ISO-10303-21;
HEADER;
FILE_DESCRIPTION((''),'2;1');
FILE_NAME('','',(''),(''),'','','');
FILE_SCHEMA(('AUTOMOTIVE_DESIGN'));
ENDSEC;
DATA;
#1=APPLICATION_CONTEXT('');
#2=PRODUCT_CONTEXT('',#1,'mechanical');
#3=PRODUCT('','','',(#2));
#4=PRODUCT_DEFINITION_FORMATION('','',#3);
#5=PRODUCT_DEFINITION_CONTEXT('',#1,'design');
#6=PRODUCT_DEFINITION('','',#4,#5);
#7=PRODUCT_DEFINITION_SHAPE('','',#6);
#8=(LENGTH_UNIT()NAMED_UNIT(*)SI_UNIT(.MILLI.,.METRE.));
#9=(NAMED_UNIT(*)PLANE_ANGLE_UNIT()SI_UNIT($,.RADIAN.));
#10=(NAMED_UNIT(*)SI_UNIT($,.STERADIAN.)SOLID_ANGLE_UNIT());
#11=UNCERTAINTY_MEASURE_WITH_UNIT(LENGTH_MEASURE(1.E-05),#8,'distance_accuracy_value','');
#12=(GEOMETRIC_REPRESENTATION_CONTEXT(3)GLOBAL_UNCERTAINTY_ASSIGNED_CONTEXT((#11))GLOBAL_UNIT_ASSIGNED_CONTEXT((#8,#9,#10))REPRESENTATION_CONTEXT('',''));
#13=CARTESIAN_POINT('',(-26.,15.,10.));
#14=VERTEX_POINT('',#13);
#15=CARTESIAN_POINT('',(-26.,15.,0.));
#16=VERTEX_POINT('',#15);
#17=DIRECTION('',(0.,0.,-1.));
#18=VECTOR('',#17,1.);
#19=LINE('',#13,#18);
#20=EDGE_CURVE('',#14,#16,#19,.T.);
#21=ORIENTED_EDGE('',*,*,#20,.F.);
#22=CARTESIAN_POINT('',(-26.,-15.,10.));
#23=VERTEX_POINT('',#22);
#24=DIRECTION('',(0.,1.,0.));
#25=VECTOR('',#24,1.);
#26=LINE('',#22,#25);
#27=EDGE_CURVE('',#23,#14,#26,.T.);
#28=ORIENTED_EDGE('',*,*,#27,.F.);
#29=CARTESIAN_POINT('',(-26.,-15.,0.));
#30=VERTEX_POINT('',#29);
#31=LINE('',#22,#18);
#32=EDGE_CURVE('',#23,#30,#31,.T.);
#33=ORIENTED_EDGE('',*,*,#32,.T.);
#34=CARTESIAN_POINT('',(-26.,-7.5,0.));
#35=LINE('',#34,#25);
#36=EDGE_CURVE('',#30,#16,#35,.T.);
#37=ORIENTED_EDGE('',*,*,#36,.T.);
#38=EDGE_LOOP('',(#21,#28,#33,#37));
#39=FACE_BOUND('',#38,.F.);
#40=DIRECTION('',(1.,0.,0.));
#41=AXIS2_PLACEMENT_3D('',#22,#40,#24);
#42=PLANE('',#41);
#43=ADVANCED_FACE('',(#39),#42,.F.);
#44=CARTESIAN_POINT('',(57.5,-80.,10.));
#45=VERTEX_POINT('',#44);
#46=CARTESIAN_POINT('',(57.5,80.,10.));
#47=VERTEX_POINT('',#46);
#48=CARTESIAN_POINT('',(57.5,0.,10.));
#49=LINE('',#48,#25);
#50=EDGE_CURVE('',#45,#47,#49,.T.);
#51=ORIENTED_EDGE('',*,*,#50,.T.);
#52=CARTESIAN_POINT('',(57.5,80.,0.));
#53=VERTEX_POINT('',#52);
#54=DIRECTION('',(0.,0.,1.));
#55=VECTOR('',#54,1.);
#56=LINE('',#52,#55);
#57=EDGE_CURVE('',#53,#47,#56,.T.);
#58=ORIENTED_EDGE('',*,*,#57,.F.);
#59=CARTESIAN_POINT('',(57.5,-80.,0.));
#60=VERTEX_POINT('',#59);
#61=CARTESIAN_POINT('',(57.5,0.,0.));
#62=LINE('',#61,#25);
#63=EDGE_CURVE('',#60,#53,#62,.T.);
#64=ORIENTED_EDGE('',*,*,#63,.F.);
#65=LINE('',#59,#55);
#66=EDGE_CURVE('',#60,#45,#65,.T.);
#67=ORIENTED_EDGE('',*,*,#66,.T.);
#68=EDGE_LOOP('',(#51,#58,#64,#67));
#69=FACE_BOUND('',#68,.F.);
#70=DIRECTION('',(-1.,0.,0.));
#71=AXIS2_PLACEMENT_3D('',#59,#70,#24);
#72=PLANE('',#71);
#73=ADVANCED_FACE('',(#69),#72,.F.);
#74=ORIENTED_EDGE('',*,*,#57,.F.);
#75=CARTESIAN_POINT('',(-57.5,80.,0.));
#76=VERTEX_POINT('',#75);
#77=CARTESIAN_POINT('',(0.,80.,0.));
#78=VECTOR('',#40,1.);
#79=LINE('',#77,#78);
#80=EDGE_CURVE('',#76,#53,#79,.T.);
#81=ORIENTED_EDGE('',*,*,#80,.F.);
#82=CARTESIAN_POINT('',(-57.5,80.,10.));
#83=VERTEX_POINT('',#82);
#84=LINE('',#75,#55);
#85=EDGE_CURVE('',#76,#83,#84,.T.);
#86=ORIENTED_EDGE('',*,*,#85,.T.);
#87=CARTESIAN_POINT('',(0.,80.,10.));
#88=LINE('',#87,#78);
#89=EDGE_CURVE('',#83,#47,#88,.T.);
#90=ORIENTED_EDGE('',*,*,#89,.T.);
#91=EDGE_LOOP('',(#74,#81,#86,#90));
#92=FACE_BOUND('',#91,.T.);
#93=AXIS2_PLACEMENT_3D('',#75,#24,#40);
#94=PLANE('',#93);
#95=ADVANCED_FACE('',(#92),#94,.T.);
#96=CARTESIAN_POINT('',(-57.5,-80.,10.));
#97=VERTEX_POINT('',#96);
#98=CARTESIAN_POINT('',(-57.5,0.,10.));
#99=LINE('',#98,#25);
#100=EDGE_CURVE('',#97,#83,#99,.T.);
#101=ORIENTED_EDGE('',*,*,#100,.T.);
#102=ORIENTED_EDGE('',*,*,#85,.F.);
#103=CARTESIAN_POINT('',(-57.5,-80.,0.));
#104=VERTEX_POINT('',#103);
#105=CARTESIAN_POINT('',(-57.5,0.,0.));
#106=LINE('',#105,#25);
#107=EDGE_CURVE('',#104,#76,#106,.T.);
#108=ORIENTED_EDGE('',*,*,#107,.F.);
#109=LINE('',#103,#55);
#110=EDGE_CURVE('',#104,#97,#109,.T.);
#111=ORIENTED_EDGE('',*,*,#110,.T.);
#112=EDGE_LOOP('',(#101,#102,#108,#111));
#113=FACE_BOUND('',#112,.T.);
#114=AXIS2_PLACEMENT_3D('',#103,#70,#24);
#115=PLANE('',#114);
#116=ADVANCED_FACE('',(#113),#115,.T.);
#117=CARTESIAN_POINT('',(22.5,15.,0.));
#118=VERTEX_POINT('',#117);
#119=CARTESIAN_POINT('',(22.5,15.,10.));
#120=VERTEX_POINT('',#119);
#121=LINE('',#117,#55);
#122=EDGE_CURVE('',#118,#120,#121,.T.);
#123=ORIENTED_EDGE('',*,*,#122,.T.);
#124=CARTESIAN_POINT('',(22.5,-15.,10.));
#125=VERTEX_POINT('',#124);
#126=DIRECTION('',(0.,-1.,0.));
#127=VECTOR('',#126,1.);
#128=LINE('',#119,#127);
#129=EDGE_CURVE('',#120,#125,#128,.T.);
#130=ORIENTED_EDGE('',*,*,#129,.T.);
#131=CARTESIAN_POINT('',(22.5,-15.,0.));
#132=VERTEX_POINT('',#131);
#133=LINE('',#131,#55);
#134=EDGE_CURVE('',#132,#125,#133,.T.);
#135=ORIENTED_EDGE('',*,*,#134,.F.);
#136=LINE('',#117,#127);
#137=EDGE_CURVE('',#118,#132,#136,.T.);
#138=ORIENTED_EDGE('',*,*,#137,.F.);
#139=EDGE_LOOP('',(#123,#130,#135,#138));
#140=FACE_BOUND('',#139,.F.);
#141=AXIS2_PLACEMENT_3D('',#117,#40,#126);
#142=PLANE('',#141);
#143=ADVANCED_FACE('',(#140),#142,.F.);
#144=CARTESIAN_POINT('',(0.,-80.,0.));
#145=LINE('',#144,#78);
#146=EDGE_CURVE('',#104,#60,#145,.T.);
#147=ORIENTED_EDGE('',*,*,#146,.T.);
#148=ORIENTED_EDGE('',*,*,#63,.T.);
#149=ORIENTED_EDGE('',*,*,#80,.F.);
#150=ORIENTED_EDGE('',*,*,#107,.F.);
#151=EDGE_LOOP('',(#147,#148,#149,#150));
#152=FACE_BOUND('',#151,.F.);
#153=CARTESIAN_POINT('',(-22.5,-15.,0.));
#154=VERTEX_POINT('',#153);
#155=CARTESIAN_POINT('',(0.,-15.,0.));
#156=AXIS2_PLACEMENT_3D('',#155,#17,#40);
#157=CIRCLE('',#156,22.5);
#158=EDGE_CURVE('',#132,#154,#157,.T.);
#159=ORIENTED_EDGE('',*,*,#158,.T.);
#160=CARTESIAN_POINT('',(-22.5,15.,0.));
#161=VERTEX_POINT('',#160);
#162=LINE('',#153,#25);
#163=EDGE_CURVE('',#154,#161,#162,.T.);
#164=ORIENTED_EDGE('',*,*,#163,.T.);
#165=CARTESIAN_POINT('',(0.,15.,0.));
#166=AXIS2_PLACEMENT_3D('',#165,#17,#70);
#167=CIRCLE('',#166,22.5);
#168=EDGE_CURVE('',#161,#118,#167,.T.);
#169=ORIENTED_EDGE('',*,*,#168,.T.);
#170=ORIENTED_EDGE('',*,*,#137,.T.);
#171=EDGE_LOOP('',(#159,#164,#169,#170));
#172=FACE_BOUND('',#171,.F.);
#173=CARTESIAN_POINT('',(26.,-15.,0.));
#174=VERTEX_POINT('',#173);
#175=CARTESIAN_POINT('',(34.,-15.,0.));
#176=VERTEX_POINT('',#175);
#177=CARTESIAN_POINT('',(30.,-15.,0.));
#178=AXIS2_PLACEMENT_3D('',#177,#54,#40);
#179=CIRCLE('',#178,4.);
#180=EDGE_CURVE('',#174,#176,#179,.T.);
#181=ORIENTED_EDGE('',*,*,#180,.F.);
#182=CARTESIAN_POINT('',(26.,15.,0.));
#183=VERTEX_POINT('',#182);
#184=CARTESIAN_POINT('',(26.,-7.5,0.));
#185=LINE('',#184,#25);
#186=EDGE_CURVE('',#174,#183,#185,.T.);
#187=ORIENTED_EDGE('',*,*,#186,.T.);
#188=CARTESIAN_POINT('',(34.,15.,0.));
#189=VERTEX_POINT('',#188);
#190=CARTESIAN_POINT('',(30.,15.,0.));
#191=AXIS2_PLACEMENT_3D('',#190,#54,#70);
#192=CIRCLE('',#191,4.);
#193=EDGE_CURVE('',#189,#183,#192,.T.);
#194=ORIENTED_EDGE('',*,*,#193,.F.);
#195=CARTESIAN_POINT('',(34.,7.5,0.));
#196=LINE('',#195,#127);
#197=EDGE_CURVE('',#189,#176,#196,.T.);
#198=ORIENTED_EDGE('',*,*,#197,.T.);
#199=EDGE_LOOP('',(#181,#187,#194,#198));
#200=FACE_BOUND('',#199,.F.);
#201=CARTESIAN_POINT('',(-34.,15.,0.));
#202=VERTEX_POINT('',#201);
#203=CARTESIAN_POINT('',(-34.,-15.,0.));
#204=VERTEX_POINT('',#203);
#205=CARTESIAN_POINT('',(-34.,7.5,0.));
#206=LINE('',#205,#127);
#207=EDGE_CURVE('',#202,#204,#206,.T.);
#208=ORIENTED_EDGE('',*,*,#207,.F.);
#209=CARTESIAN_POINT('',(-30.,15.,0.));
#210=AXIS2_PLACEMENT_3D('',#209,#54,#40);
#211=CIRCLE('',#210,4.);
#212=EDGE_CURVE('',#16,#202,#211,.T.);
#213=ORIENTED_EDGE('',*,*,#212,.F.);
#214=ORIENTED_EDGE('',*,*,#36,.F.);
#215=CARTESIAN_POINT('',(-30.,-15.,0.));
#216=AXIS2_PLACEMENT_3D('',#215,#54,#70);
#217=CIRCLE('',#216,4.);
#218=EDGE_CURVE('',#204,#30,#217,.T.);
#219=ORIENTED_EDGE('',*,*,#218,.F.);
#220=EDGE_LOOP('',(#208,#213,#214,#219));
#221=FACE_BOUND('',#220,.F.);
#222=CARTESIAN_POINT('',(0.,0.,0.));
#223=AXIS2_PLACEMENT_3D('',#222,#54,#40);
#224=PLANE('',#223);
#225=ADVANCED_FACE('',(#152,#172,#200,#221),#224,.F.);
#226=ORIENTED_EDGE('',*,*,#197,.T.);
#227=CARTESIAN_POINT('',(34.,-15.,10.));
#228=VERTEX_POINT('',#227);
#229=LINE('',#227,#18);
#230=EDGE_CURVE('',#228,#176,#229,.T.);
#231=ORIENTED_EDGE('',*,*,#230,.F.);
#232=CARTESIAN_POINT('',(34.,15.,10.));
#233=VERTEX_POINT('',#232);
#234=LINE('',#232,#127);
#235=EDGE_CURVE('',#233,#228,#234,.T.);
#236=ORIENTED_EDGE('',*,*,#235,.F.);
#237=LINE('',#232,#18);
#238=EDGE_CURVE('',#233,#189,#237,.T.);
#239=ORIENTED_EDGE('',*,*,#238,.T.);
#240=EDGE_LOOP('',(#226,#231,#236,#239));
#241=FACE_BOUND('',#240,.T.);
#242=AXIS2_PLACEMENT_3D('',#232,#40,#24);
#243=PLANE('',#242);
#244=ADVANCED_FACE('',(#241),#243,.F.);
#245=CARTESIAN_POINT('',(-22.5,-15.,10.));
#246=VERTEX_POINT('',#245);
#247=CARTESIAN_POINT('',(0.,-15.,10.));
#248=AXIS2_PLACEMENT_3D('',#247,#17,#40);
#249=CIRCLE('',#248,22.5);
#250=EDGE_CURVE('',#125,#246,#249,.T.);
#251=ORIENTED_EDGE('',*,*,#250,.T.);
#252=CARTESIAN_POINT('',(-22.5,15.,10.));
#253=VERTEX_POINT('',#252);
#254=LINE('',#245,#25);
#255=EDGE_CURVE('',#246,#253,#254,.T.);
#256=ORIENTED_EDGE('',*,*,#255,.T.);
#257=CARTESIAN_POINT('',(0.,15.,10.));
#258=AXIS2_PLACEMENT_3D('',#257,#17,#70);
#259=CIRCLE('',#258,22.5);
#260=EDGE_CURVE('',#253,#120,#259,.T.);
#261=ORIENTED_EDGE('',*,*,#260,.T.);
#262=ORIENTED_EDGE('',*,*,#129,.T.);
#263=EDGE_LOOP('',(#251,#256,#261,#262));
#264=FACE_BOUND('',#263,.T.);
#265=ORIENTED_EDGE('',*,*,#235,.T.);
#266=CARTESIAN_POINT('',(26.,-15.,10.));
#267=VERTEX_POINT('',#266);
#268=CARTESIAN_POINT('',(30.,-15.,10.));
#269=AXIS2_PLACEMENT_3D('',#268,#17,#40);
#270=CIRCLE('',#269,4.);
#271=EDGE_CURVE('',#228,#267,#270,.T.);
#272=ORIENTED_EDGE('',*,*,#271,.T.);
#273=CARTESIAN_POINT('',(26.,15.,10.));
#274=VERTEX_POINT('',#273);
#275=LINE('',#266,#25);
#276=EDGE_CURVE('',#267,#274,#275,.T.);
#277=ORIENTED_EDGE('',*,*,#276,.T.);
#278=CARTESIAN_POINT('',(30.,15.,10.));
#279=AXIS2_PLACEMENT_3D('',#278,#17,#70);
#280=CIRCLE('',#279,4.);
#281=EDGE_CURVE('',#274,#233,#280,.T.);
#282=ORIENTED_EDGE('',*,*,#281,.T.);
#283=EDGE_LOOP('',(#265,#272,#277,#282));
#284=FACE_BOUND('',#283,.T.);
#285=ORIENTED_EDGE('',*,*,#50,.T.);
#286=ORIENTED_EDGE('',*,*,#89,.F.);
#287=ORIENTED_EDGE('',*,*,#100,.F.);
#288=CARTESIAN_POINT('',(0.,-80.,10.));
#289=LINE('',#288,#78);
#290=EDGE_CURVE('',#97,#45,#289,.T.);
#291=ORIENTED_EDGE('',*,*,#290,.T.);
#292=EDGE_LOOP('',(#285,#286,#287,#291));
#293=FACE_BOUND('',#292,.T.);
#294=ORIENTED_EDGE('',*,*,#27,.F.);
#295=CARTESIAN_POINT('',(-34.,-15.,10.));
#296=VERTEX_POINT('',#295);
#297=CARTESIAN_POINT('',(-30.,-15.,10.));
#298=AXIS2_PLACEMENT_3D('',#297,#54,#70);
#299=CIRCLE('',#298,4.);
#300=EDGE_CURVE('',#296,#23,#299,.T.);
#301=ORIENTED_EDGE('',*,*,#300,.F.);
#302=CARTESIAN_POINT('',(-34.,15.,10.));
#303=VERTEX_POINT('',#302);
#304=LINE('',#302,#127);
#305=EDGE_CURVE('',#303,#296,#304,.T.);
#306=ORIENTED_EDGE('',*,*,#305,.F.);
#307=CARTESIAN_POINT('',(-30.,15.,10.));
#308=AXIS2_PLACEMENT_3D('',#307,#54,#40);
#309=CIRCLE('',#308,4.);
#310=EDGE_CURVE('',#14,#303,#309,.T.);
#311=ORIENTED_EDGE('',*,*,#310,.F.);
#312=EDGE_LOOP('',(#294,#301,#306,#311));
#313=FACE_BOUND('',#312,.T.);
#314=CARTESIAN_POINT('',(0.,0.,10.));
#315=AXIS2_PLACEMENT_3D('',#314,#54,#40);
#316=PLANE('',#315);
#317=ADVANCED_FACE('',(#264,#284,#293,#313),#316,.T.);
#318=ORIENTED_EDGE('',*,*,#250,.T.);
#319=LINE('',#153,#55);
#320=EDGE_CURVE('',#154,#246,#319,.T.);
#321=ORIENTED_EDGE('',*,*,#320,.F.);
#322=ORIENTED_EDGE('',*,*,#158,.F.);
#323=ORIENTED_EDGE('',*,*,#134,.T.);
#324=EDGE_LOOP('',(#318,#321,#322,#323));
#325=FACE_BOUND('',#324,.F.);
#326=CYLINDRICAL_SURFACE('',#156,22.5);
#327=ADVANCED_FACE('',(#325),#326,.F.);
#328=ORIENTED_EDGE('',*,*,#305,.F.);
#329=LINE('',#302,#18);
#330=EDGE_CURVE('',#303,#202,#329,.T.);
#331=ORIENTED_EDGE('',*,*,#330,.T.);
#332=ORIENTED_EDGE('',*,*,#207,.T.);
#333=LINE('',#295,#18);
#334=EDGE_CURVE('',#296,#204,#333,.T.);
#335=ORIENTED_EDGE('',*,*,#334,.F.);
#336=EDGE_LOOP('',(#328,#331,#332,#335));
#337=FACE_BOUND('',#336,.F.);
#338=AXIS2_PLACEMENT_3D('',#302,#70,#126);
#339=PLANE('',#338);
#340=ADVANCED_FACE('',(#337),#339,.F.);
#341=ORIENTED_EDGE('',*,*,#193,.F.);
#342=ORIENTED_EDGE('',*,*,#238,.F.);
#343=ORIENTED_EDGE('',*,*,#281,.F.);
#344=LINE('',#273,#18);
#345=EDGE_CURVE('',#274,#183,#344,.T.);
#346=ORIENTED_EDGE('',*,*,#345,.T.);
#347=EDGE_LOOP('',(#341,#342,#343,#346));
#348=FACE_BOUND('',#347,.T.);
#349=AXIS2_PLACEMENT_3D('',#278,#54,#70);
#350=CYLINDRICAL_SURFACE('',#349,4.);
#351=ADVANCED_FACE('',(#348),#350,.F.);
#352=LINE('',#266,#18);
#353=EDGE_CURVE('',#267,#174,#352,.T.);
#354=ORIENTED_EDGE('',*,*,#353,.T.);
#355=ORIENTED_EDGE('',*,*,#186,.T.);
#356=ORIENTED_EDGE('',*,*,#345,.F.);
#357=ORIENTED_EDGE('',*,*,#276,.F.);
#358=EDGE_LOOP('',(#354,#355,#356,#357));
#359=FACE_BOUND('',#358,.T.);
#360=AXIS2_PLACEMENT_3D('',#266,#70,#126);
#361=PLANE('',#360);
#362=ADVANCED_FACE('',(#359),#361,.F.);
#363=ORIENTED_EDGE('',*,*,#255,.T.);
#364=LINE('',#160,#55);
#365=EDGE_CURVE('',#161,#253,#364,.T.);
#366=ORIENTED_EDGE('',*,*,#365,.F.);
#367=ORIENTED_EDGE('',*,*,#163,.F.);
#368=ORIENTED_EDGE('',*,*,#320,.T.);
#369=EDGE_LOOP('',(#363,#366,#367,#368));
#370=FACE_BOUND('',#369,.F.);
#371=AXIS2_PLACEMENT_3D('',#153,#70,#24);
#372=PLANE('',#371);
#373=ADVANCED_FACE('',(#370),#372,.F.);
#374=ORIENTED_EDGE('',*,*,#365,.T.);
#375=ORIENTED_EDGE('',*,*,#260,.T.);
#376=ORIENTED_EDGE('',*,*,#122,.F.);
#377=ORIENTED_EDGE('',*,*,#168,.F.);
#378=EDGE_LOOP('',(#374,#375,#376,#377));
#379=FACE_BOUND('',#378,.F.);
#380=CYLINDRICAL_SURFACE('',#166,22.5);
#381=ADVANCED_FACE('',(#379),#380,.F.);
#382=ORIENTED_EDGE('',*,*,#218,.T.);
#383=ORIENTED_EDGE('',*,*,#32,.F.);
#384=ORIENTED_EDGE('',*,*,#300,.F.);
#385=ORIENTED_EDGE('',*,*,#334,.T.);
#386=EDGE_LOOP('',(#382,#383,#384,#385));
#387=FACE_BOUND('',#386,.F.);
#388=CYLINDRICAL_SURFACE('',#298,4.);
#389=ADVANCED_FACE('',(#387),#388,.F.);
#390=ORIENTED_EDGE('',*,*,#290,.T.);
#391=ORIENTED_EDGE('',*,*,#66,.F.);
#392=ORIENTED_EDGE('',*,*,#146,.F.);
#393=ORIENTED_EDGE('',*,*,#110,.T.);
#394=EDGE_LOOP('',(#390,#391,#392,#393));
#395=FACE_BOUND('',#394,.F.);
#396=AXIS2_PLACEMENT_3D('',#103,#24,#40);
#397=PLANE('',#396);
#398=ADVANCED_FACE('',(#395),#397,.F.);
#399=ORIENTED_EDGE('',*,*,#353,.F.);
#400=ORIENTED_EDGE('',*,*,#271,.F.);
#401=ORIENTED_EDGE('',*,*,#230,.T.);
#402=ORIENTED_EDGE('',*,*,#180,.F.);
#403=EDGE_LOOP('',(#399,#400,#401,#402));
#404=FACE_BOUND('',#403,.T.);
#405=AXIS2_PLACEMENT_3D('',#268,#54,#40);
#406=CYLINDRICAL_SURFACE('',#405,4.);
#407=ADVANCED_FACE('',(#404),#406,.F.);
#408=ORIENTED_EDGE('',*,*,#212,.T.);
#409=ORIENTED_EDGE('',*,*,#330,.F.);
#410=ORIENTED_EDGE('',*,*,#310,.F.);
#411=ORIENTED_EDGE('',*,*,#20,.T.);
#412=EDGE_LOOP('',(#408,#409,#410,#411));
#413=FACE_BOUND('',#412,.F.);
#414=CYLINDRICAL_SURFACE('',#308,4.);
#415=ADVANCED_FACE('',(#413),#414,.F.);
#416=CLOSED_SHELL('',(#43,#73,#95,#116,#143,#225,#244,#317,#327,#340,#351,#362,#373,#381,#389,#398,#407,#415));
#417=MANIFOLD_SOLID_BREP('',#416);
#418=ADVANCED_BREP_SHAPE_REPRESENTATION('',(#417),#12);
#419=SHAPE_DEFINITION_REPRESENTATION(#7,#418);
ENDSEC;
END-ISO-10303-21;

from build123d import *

# Parameters (mm, degrees)
F0_W     = 115
F0_H     = 160
F1_DEPTH = 10
F3_DEPTH = 10.001


# Not quite as in the source:
# - a pattern or mirror of a feature is missing from the dataset's text; its kind, count and spacing are read off the source's solid


with BuildPart() as f1:
    # F0 (on Top) → F1 (new body)
    with BuildSketch(Plane.XY):
        Rectangle(F0_W, F0_H)
        with BuildLine():
            Line((-22.5, -15), (-22.5, 15))
            ThreePointArc((-22.5, 15), (0, 37.5), (22.5, 15))
            Line((22.5, 15), (22.5, -15))
            ThreePointArc((22.5, -15), (0, -37.5), (-22.5, -15))
        make_face(mode=Mode.SUBTRACT)
    extrude(amount=F1_DEPTH)

    # F2 (on face) → F3 (cut, through all)
    with BuildSketch(Plane.XY.offset(10)):
        with BuildLine():
            ThreePointArc((-26, 15), (-30, 19), (-34, 15))
            Line((-34, 15), (-34, -15))
            ThreePointArc((-34, -15), (-30, -19), (-26, -15))
            Line((-26, -15), (-26, 0))
            Line((-26, 0), (-26, 15))
        make_face()
    f3 = extrude(amount=-F3_DEPTH, mode=Mode.SUBTRACT)

    # F3_copies: F3 across plane
    add(f3.mirror(Plane(origin=(0, 0, 0), x_dir=(0, 0, 1), z_dir=(1, 0, 0))), mode=Mode.SUBTRACT)


solid = f1.part
